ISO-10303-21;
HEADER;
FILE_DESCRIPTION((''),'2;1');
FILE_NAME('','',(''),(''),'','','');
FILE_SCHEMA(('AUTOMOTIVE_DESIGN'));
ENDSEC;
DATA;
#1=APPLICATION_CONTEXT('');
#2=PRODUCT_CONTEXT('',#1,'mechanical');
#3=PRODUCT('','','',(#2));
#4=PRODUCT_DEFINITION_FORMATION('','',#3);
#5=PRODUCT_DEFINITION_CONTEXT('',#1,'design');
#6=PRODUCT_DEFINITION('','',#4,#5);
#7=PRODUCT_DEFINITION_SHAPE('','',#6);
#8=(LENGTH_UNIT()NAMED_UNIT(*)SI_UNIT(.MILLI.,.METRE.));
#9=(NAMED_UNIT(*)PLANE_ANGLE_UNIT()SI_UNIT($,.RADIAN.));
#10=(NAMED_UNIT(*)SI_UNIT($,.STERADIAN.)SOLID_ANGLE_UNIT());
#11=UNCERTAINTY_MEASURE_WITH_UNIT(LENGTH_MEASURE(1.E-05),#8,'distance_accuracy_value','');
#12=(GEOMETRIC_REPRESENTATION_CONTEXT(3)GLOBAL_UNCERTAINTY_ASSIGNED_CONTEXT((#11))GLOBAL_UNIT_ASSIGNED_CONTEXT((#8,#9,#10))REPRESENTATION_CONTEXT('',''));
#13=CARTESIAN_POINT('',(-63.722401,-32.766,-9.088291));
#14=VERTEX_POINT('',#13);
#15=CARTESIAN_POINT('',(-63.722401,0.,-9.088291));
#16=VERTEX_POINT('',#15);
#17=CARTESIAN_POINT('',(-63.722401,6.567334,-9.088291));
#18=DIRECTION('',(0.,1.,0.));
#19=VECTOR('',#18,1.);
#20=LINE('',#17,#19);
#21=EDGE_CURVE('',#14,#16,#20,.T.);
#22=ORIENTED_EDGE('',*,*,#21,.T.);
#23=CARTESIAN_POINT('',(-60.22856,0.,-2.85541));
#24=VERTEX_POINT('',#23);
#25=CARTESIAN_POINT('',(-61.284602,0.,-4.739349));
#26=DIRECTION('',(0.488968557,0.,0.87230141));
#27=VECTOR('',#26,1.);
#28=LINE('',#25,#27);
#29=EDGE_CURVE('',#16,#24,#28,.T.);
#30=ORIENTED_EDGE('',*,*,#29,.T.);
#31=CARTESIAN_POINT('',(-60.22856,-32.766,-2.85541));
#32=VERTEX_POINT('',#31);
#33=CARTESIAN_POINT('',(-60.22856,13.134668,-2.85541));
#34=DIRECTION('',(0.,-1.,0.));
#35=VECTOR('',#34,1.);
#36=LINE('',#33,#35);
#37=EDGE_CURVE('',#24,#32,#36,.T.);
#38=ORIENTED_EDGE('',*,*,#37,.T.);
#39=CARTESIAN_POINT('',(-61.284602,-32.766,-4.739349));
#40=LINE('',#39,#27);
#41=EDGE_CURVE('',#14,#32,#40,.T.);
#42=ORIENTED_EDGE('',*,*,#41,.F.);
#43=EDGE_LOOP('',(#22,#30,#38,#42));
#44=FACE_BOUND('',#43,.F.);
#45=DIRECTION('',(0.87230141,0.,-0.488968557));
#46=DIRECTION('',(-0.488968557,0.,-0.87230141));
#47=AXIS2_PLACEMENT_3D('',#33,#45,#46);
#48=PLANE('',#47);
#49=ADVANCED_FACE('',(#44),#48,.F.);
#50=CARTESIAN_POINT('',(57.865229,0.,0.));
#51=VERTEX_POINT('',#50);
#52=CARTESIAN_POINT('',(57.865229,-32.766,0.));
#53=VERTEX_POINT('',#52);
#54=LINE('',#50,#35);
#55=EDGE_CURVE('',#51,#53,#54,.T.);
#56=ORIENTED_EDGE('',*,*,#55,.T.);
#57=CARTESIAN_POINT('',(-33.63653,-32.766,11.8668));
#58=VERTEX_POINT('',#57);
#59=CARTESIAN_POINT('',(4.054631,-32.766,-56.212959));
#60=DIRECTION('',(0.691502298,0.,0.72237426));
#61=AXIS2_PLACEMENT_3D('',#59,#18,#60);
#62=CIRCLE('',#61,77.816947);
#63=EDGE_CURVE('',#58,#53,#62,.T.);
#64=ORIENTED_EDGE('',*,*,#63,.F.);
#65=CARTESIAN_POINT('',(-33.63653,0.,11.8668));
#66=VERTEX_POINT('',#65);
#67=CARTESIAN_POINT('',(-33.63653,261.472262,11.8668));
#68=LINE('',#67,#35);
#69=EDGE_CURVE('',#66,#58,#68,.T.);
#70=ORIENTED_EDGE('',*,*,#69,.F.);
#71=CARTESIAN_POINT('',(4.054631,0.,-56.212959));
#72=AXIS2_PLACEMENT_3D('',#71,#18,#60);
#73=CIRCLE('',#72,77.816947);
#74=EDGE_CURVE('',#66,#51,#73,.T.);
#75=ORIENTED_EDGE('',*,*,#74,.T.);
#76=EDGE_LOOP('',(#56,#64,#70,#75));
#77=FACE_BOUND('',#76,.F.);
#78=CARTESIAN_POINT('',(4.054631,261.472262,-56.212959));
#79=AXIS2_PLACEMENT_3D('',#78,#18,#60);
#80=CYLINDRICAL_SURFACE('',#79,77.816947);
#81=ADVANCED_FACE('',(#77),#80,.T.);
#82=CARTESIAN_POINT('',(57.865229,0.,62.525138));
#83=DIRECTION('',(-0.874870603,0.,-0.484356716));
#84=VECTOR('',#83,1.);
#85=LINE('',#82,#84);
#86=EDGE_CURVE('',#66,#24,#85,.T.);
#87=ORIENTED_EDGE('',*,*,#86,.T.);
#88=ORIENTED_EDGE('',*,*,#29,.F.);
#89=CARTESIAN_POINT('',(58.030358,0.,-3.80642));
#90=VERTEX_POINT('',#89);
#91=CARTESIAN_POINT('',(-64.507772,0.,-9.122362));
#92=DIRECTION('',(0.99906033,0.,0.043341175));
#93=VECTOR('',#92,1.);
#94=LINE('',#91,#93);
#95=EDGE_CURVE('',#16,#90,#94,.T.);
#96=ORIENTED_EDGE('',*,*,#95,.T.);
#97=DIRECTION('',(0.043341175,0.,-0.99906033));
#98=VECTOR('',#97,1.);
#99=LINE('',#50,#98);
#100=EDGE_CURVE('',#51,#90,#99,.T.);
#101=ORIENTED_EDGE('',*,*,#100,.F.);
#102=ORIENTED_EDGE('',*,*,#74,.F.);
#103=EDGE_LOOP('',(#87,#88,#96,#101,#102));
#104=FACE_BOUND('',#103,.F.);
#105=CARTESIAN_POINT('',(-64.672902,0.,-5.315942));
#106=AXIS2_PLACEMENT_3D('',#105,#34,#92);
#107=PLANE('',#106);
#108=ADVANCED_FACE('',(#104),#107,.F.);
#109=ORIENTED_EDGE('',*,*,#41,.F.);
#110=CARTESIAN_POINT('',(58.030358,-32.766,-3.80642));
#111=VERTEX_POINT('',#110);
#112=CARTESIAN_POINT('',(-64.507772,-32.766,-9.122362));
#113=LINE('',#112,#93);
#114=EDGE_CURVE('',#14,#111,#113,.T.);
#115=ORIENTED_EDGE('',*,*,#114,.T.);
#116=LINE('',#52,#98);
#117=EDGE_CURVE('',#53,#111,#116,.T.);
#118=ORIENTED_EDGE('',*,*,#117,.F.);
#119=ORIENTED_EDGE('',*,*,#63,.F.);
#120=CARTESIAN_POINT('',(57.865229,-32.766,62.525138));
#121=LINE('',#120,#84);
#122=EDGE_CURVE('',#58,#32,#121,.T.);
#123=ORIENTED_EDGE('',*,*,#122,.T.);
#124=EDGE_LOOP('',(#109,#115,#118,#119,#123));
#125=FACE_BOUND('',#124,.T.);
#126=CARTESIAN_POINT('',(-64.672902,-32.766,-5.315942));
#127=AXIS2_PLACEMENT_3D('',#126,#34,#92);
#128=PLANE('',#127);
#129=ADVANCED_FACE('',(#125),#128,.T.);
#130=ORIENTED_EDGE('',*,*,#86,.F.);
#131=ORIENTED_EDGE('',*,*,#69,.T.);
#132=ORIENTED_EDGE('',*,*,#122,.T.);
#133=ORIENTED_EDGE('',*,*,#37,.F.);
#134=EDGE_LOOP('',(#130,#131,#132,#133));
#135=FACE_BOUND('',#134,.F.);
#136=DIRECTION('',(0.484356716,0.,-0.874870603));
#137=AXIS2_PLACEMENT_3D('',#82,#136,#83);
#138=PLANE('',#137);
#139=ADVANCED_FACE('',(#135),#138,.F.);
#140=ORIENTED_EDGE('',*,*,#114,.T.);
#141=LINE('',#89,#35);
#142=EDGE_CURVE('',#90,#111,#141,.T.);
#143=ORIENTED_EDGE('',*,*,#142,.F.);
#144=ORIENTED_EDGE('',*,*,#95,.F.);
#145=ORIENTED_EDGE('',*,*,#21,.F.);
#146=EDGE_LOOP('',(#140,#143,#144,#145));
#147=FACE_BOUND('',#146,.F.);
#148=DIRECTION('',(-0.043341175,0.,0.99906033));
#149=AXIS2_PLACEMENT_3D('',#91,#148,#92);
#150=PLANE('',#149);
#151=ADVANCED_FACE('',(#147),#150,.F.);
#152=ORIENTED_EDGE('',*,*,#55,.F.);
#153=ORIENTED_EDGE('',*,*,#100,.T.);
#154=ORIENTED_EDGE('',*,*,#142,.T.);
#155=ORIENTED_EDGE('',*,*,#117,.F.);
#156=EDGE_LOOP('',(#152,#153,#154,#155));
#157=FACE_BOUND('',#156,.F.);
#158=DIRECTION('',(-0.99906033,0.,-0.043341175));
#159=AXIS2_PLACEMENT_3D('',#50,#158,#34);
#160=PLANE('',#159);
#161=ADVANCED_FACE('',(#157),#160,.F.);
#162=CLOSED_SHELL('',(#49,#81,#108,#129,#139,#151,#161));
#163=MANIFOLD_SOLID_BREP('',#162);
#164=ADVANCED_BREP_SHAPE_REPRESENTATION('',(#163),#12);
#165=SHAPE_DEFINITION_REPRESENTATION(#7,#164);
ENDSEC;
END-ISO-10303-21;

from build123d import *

# Parameters (mm, degrees)
F1_DEPTH    = 32.766
F2_T1_DEPTH = 555.7105242514
F3_DEPTH    = 3.81
F4_T1_DEPTH = 59.0353369856


# Not quite as in the source:
# - a fillet or chamfer that OpenCascade refuses, or shapes differently, is made with other operations: its cross-section is extruded or revolved along the edge and cut away or added


with BuildPart() as f1:
    # F0 (on Front) → F1 (new body)
    with BuildSketch(Plane.XZ):
        Polygon((57.8652285039, 0), (57.8652285039, 62.5251382589), (-64.6729022264, -5.3159417585), align=None)
    extrude(amount=F1_DEPTH)

    # F2: fillet of radius 77.8169467068 on 1 edges, made by hand

    # F2_s2 → F2_t1 (cut)
    with BuildSketch(Plane.XZ.offset(-261.4722621257)):
        with BuildLine():
            ThreePointArc((57.8652285039, 0), (14.0628423673, 20.9577145427), (-33.6365297354, 11.8667997855))
            Line((-33.6365297354, 11.8667997855), (-34.3903529504, 13.228394967))
            Line((-34.3903529504, 13.228394967), (57.111405289, 63.8867334405))
            Line((57.111405289, 63.8867334405), (59.4215674381, 62.5251382589))
            ThreePointArc((59.4215674381, 62.5251382589), (59.4215674381, 31.2625691295), (58.9414404538, 1.1242591859))
            Line((58.9414404538, 1.1242591859), (57.8652285039, 0))
        make_face()
    extrude(amount=F2_T1_DEPTH, mode=Mode.SUBTRACT)

    # F3 (add): a face of the model
    f3_faces = [f1.faces().sort_by_distance(p)[0] for p in [
        (-3.4038368613, -16.383, -2.6579708792),
    ]]
    extrude(f3_faces, amount=F3_DEPTH)

    # F4: chamfer of 5.08 on 1 edges, made by hand

    # F4_s2 → F4_t1 (cut)
    with BuildSketch(Plane.XZ.offset(-13.1346684928)):
        Polygon((-60.2285595639, -2.8554096417), (-64.4527290592, -10.3911682338), (-64.6729022264, -5.3159417585), align=None)
    extrude(amount=F4_T1_DEPTH, mode=Mode.SUBTRACT)


solid = f1.part
